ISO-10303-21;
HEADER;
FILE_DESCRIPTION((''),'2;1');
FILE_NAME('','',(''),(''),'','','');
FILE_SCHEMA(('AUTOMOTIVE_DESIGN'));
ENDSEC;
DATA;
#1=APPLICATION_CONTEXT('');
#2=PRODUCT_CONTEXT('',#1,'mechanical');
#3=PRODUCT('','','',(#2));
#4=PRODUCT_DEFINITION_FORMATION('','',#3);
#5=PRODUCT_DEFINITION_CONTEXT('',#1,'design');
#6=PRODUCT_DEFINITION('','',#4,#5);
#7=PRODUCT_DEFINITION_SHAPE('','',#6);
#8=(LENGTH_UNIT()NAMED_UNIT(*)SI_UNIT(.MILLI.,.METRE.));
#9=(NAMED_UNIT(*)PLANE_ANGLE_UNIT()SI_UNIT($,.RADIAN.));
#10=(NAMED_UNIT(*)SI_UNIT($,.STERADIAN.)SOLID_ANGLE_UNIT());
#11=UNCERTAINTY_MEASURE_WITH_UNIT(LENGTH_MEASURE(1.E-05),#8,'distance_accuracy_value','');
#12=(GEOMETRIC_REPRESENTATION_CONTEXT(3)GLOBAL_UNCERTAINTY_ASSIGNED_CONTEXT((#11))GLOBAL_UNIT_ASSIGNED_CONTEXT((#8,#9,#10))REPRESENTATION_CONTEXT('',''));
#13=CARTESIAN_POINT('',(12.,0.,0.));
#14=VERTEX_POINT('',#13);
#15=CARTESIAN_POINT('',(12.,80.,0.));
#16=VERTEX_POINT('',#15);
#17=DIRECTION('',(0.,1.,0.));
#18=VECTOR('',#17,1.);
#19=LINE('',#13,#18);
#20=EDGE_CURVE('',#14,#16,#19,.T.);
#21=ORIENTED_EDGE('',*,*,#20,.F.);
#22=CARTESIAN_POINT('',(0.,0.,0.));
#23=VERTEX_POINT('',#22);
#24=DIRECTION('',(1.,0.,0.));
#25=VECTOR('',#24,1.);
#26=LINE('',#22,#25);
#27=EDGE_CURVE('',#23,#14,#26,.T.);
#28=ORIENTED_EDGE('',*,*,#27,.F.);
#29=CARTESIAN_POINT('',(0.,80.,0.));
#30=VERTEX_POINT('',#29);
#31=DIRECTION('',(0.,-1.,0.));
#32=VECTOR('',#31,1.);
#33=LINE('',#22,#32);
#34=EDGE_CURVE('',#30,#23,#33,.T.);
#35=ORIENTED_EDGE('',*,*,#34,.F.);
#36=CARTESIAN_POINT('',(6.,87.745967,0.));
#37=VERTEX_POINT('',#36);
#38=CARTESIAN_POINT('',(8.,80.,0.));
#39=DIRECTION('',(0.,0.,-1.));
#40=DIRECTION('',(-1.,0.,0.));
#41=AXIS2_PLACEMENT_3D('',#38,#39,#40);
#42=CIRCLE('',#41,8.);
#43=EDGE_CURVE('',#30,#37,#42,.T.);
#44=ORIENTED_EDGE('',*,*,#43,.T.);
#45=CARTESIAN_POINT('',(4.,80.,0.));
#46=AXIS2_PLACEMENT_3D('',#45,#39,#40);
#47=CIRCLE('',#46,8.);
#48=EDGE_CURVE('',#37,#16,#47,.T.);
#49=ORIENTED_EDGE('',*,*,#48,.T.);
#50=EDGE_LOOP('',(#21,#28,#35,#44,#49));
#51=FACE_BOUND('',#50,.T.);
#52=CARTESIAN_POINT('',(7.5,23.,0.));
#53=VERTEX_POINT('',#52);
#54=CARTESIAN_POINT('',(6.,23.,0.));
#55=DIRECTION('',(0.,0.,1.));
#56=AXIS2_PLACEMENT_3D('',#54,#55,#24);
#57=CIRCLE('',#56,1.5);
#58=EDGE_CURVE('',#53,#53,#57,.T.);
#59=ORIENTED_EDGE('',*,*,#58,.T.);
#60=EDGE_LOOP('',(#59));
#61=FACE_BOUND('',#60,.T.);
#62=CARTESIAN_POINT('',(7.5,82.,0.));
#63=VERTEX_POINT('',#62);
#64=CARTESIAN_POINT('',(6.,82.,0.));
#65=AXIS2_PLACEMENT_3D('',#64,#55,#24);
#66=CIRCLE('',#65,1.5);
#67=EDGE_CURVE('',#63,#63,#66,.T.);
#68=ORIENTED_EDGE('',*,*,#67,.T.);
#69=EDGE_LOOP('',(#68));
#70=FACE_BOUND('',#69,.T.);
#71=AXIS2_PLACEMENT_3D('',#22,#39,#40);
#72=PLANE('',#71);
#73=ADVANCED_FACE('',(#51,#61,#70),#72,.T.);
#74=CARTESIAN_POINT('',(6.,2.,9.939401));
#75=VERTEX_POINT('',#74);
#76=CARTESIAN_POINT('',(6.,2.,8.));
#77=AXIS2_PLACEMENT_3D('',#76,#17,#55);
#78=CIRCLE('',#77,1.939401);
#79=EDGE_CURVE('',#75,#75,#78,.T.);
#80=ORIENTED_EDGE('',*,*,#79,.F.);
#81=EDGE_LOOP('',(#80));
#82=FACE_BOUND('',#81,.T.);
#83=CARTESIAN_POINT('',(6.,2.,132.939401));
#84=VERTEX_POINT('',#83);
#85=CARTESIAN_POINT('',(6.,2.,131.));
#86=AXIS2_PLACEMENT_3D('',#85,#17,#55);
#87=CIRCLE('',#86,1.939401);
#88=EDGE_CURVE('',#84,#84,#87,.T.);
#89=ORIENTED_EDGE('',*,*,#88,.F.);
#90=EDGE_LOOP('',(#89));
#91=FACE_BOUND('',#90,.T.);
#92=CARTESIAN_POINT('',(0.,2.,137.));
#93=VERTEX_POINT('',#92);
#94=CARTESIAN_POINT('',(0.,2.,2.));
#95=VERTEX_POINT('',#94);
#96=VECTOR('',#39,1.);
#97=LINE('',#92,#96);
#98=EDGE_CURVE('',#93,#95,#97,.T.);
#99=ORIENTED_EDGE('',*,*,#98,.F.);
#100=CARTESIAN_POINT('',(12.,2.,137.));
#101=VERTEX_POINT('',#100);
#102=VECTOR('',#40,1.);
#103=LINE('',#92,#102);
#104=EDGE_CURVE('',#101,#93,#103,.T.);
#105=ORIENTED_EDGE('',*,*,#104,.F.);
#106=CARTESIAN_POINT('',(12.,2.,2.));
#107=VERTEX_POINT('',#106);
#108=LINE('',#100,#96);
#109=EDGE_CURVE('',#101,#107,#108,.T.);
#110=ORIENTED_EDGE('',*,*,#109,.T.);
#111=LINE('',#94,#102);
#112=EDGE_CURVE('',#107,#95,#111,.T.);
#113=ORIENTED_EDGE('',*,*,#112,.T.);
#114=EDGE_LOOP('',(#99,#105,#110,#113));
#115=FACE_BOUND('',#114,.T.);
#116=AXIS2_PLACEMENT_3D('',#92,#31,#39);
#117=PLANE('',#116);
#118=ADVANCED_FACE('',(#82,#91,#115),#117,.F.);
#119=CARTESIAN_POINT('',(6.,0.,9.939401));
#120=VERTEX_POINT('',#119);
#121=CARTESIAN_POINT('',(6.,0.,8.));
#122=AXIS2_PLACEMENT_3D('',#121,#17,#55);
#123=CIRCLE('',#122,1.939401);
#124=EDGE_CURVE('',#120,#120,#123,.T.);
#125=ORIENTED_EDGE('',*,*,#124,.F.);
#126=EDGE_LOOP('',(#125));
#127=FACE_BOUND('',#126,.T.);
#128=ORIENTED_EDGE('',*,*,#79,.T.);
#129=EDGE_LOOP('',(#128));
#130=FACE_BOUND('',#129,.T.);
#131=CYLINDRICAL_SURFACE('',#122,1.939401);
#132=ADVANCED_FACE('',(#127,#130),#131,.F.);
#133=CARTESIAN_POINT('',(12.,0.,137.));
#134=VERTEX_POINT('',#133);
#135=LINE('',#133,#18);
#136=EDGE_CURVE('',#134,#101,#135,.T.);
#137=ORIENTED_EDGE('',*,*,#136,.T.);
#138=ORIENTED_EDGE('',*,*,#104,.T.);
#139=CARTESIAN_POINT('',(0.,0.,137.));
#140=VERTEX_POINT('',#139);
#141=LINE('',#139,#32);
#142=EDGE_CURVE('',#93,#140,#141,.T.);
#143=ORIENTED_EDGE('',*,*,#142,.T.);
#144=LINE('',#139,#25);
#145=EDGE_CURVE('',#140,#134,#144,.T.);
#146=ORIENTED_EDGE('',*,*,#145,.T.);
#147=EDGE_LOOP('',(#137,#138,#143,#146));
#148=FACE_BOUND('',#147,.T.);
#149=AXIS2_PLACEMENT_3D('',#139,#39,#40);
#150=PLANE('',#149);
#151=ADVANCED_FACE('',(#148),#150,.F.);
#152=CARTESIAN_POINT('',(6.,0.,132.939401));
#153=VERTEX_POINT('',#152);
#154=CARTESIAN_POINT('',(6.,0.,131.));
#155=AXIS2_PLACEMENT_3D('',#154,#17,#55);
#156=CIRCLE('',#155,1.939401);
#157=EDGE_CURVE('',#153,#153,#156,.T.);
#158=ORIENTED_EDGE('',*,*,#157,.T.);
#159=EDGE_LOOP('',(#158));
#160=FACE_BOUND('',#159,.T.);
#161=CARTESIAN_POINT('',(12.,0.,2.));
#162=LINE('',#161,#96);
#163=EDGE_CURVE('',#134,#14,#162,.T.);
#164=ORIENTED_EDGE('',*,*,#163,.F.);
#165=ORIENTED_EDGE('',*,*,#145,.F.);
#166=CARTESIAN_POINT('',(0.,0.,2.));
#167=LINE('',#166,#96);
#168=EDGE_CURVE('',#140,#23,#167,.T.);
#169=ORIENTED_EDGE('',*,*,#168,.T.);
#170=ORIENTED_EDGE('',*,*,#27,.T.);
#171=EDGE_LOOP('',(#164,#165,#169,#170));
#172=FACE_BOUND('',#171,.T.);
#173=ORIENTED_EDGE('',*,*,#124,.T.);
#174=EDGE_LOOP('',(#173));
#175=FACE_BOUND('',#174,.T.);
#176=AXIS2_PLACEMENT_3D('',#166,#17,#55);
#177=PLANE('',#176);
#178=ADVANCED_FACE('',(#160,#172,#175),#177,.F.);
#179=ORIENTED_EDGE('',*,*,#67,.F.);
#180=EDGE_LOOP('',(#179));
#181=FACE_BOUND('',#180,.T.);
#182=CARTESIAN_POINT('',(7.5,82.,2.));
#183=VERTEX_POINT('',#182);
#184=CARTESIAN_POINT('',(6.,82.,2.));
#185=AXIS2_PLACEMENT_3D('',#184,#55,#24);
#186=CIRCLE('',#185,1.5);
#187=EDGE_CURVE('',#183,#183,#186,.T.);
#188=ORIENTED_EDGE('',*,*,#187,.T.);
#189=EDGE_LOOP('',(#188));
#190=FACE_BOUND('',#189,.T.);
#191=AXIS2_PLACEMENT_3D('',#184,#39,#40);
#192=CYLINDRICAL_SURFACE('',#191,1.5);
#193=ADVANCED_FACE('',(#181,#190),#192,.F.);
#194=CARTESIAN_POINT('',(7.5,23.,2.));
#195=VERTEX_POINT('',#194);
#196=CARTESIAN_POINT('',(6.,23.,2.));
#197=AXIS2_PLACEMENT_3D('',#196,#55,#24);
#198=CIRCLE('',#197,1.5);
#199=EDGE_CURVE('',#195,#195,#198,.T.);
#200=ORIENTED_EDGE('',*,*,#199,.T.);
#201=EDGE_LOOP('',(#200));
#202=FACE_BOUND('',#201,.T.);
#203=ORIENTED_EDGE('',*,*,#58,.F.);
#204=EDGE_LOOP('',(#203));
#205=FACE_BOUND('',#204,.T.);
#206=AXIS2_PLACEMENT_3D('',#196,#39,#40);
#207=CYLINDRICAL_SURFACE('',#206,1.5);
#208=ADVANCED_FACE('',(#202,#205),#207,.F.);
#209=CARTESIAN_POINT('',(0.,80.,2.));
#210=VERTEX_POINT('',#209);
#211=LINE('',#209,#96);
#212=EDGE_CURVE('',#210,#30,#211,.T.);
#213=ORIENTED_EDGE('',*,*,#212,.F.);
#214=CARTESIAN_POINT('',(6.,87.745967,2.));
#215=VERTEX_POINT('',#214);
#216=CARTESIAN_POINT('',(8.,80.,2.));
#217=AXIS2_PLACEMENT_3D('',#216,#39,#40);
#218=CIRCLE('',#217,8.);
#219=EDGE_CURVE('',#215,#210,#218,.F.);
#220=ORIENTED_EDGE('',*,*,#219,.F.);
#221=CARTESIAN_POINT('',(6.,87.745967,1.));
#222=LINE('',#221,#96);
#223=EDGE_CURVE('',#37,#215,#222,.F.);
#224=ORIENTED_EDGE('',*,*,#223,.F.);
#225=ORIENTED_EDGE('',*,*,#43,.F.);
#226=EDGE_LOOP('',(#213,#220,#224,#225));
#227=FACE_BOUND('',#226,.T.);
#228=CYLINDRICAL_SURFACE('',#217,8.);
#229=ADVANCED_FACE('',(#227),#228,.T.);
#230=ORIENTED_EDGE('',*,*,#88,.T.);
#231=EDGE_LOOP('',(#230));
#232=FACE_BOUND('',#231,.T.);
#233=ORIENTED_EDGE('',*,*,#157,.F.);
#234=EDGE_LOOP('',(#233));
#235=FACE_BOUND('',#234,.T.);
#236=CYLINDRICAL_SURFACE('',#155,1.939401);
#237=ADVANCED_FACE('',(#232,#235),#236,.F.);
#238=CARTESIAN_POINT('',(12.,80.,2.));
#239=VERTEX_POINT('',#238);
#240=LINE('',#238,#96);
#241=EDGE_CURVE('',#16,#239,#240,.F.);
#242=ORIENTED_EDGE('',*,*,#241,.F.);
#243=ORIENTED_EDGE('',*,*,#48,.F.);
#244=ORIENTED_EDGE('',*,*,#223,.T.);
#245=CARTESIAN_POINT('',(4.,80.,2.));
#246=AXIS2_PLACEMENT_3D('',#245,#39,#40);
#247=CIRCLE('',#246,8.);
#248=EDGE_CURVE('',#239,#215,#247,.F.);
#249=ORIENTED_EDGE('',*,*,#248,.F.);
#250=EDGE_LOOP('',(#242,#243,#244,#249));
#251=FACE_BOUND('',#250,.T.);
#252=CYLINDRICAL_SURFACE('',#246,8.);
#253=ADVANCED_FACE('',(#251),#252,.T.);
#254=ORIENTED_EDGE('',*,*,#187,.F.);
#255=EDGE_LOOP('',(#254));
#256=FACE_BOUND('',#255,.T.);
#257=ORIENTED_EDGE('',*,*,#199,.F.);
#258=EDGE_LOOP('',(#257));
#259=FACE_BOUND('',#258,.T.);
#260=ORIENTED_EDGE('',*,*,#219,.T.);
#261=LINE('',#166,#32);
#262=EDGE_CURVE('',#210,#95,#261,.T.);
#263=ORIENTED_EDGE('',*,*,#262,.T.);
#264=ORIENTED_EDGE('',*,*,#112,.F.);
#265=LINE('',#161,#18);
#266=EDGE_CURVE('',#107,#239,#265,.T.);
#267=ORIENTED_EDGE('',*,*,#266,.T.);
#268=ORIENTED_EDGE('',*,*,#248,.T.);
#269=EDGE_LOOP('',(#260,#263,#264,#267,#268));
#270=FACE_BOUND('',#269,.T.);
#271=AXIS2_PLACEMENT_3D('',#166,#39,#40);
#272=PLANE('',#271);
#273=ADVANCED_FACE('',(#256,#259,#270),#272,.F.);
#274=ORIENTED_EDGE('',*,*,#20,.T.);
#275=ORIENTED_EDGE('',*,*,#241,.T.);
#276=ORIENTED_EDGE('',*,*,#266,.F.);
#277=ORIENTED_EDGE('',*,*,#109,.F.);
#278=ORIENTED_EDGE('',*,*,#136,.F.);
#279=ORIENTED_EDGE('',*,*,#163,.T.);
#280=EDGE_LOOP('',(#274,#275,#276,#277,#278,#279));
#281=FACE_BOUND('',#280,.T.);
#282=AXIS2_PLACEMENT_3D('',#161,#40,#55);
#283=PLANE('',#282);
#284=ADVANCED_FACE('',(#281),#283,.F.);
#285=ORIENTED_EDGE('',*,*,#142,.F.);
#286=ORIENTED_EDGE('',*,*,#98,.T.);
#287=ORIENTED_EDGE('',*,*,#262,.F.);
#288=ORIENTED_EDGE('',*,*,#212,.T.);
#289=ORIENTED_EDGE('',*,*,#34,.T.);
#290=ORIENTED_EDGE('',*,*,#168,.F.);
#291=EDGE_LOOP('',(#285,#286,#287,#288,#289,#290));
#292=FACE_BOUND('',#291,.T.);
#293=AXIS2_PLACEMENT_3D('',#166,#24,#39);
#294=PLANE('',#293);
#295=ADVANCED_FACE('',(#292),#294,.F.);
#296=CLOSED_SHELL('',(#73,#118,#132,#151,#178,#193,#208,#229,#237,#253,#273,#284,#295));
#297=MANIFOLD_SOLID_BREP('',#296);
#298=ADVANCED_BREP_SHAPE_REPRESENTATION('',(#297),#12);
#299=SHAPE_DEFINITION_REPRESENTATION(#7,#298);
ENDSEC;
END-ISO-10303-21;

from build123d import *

# Parameters (mm, degrees)
SKETCH1_W           = 12
SKETCH1_H           = 88
SKETCH1_R           = 1.5
BOSS_EXTRUDE1_DEPTH = 2
SKETCH2_W           = 12
SKETCH2_H           = 2
BOSS_EXTRUDE2_DEPTH = 135
FILLET1_R           = 8
SKETCH3_R           = 1.939400698
CUT_EXTRUDE1_DEPTH  = 163.065945849


with BuildPart() as part:
    # Sketch1 → Boss-Extrude1 (new body)
    with BuildSketch(Plane.XY):
        with Locations((6, 44)):
            Rectangle(SKETCH1_W, SKETCH1_H)
        with Locations((6, 82)):
            Circle(SKETCH1_R, mode=Mode.SUBTRACT)
        with Locations((6, 23)):
            Circle(SKETCH1_R, mode=Mode.SUBTRACT)
    extrude(amount=BOSS_EXTRUDE1_DEPTH)

    # Sketch2 → Boss-Extrude2 (add)
    with BuildSketch(Plane.XY.offset(2)):
        with Locations((6, 1)):
            Rectangle(SKETCH2_W, SKETCH2_H)
    extrude(amount=BOSS_EXTRUDE2_DEPTH)

    # Fillet1
    # the kernel refuses this fillet: 8 mm, written as the material it takes off along each edge
    with BuildSketch(Plane(origin=(12, 88, -20), x_dir=(-1, 0, 0), z_dir=(0, 0, 1))) as fillet1_piece_1:
        with BuildLine():
            CenterArc((FILLET1_R, FILLET1_R), FILLET1_R, 180, 90)
            Line((0, FILLET1_R), (0, 0))
            Line((0, 0), (FILLET1_R, 0))
        make_face()
    extrude(amount=42, mode=Mode.SUBTRACT)
    with BuildSketch(Plane(origin=(0, 88, -20), x_dir=(1, 0, 0), z_dir=(0, 0, 1))) as fillet1_piece_2:
        with BuildLine():
            CenterArc((FILLET1_R, -FILLET1_R), FILLET1_R, 90, 90)
            Line((0, -FILLET1_R), (0, 0))
            Line((0, 0), (FILLET1_R, 0))
        make_face()
    extrude(amount=42, mode=Mode.SUBTRACT)

    # Sketch3 → Cut-Extrude1 (cut, through all)
    with BuildSketch(Plane(origin=(0, 2, 0), x_dir=(1, 0, 0), z_dir=(0, 1, 0))):
        with Locations(Location((6, -131, 0), (0, 0, 270))):
            Circle(SKETCH3_R)
        with Locations(Location((6, -8, 0), (0, 0, 270))):
            Circle(SKETCH3_R)
    extrude(amount=-CUT_EXTRUDE1_DEPTH, mode=Mode.SUBTRACT)


solid = part.part
